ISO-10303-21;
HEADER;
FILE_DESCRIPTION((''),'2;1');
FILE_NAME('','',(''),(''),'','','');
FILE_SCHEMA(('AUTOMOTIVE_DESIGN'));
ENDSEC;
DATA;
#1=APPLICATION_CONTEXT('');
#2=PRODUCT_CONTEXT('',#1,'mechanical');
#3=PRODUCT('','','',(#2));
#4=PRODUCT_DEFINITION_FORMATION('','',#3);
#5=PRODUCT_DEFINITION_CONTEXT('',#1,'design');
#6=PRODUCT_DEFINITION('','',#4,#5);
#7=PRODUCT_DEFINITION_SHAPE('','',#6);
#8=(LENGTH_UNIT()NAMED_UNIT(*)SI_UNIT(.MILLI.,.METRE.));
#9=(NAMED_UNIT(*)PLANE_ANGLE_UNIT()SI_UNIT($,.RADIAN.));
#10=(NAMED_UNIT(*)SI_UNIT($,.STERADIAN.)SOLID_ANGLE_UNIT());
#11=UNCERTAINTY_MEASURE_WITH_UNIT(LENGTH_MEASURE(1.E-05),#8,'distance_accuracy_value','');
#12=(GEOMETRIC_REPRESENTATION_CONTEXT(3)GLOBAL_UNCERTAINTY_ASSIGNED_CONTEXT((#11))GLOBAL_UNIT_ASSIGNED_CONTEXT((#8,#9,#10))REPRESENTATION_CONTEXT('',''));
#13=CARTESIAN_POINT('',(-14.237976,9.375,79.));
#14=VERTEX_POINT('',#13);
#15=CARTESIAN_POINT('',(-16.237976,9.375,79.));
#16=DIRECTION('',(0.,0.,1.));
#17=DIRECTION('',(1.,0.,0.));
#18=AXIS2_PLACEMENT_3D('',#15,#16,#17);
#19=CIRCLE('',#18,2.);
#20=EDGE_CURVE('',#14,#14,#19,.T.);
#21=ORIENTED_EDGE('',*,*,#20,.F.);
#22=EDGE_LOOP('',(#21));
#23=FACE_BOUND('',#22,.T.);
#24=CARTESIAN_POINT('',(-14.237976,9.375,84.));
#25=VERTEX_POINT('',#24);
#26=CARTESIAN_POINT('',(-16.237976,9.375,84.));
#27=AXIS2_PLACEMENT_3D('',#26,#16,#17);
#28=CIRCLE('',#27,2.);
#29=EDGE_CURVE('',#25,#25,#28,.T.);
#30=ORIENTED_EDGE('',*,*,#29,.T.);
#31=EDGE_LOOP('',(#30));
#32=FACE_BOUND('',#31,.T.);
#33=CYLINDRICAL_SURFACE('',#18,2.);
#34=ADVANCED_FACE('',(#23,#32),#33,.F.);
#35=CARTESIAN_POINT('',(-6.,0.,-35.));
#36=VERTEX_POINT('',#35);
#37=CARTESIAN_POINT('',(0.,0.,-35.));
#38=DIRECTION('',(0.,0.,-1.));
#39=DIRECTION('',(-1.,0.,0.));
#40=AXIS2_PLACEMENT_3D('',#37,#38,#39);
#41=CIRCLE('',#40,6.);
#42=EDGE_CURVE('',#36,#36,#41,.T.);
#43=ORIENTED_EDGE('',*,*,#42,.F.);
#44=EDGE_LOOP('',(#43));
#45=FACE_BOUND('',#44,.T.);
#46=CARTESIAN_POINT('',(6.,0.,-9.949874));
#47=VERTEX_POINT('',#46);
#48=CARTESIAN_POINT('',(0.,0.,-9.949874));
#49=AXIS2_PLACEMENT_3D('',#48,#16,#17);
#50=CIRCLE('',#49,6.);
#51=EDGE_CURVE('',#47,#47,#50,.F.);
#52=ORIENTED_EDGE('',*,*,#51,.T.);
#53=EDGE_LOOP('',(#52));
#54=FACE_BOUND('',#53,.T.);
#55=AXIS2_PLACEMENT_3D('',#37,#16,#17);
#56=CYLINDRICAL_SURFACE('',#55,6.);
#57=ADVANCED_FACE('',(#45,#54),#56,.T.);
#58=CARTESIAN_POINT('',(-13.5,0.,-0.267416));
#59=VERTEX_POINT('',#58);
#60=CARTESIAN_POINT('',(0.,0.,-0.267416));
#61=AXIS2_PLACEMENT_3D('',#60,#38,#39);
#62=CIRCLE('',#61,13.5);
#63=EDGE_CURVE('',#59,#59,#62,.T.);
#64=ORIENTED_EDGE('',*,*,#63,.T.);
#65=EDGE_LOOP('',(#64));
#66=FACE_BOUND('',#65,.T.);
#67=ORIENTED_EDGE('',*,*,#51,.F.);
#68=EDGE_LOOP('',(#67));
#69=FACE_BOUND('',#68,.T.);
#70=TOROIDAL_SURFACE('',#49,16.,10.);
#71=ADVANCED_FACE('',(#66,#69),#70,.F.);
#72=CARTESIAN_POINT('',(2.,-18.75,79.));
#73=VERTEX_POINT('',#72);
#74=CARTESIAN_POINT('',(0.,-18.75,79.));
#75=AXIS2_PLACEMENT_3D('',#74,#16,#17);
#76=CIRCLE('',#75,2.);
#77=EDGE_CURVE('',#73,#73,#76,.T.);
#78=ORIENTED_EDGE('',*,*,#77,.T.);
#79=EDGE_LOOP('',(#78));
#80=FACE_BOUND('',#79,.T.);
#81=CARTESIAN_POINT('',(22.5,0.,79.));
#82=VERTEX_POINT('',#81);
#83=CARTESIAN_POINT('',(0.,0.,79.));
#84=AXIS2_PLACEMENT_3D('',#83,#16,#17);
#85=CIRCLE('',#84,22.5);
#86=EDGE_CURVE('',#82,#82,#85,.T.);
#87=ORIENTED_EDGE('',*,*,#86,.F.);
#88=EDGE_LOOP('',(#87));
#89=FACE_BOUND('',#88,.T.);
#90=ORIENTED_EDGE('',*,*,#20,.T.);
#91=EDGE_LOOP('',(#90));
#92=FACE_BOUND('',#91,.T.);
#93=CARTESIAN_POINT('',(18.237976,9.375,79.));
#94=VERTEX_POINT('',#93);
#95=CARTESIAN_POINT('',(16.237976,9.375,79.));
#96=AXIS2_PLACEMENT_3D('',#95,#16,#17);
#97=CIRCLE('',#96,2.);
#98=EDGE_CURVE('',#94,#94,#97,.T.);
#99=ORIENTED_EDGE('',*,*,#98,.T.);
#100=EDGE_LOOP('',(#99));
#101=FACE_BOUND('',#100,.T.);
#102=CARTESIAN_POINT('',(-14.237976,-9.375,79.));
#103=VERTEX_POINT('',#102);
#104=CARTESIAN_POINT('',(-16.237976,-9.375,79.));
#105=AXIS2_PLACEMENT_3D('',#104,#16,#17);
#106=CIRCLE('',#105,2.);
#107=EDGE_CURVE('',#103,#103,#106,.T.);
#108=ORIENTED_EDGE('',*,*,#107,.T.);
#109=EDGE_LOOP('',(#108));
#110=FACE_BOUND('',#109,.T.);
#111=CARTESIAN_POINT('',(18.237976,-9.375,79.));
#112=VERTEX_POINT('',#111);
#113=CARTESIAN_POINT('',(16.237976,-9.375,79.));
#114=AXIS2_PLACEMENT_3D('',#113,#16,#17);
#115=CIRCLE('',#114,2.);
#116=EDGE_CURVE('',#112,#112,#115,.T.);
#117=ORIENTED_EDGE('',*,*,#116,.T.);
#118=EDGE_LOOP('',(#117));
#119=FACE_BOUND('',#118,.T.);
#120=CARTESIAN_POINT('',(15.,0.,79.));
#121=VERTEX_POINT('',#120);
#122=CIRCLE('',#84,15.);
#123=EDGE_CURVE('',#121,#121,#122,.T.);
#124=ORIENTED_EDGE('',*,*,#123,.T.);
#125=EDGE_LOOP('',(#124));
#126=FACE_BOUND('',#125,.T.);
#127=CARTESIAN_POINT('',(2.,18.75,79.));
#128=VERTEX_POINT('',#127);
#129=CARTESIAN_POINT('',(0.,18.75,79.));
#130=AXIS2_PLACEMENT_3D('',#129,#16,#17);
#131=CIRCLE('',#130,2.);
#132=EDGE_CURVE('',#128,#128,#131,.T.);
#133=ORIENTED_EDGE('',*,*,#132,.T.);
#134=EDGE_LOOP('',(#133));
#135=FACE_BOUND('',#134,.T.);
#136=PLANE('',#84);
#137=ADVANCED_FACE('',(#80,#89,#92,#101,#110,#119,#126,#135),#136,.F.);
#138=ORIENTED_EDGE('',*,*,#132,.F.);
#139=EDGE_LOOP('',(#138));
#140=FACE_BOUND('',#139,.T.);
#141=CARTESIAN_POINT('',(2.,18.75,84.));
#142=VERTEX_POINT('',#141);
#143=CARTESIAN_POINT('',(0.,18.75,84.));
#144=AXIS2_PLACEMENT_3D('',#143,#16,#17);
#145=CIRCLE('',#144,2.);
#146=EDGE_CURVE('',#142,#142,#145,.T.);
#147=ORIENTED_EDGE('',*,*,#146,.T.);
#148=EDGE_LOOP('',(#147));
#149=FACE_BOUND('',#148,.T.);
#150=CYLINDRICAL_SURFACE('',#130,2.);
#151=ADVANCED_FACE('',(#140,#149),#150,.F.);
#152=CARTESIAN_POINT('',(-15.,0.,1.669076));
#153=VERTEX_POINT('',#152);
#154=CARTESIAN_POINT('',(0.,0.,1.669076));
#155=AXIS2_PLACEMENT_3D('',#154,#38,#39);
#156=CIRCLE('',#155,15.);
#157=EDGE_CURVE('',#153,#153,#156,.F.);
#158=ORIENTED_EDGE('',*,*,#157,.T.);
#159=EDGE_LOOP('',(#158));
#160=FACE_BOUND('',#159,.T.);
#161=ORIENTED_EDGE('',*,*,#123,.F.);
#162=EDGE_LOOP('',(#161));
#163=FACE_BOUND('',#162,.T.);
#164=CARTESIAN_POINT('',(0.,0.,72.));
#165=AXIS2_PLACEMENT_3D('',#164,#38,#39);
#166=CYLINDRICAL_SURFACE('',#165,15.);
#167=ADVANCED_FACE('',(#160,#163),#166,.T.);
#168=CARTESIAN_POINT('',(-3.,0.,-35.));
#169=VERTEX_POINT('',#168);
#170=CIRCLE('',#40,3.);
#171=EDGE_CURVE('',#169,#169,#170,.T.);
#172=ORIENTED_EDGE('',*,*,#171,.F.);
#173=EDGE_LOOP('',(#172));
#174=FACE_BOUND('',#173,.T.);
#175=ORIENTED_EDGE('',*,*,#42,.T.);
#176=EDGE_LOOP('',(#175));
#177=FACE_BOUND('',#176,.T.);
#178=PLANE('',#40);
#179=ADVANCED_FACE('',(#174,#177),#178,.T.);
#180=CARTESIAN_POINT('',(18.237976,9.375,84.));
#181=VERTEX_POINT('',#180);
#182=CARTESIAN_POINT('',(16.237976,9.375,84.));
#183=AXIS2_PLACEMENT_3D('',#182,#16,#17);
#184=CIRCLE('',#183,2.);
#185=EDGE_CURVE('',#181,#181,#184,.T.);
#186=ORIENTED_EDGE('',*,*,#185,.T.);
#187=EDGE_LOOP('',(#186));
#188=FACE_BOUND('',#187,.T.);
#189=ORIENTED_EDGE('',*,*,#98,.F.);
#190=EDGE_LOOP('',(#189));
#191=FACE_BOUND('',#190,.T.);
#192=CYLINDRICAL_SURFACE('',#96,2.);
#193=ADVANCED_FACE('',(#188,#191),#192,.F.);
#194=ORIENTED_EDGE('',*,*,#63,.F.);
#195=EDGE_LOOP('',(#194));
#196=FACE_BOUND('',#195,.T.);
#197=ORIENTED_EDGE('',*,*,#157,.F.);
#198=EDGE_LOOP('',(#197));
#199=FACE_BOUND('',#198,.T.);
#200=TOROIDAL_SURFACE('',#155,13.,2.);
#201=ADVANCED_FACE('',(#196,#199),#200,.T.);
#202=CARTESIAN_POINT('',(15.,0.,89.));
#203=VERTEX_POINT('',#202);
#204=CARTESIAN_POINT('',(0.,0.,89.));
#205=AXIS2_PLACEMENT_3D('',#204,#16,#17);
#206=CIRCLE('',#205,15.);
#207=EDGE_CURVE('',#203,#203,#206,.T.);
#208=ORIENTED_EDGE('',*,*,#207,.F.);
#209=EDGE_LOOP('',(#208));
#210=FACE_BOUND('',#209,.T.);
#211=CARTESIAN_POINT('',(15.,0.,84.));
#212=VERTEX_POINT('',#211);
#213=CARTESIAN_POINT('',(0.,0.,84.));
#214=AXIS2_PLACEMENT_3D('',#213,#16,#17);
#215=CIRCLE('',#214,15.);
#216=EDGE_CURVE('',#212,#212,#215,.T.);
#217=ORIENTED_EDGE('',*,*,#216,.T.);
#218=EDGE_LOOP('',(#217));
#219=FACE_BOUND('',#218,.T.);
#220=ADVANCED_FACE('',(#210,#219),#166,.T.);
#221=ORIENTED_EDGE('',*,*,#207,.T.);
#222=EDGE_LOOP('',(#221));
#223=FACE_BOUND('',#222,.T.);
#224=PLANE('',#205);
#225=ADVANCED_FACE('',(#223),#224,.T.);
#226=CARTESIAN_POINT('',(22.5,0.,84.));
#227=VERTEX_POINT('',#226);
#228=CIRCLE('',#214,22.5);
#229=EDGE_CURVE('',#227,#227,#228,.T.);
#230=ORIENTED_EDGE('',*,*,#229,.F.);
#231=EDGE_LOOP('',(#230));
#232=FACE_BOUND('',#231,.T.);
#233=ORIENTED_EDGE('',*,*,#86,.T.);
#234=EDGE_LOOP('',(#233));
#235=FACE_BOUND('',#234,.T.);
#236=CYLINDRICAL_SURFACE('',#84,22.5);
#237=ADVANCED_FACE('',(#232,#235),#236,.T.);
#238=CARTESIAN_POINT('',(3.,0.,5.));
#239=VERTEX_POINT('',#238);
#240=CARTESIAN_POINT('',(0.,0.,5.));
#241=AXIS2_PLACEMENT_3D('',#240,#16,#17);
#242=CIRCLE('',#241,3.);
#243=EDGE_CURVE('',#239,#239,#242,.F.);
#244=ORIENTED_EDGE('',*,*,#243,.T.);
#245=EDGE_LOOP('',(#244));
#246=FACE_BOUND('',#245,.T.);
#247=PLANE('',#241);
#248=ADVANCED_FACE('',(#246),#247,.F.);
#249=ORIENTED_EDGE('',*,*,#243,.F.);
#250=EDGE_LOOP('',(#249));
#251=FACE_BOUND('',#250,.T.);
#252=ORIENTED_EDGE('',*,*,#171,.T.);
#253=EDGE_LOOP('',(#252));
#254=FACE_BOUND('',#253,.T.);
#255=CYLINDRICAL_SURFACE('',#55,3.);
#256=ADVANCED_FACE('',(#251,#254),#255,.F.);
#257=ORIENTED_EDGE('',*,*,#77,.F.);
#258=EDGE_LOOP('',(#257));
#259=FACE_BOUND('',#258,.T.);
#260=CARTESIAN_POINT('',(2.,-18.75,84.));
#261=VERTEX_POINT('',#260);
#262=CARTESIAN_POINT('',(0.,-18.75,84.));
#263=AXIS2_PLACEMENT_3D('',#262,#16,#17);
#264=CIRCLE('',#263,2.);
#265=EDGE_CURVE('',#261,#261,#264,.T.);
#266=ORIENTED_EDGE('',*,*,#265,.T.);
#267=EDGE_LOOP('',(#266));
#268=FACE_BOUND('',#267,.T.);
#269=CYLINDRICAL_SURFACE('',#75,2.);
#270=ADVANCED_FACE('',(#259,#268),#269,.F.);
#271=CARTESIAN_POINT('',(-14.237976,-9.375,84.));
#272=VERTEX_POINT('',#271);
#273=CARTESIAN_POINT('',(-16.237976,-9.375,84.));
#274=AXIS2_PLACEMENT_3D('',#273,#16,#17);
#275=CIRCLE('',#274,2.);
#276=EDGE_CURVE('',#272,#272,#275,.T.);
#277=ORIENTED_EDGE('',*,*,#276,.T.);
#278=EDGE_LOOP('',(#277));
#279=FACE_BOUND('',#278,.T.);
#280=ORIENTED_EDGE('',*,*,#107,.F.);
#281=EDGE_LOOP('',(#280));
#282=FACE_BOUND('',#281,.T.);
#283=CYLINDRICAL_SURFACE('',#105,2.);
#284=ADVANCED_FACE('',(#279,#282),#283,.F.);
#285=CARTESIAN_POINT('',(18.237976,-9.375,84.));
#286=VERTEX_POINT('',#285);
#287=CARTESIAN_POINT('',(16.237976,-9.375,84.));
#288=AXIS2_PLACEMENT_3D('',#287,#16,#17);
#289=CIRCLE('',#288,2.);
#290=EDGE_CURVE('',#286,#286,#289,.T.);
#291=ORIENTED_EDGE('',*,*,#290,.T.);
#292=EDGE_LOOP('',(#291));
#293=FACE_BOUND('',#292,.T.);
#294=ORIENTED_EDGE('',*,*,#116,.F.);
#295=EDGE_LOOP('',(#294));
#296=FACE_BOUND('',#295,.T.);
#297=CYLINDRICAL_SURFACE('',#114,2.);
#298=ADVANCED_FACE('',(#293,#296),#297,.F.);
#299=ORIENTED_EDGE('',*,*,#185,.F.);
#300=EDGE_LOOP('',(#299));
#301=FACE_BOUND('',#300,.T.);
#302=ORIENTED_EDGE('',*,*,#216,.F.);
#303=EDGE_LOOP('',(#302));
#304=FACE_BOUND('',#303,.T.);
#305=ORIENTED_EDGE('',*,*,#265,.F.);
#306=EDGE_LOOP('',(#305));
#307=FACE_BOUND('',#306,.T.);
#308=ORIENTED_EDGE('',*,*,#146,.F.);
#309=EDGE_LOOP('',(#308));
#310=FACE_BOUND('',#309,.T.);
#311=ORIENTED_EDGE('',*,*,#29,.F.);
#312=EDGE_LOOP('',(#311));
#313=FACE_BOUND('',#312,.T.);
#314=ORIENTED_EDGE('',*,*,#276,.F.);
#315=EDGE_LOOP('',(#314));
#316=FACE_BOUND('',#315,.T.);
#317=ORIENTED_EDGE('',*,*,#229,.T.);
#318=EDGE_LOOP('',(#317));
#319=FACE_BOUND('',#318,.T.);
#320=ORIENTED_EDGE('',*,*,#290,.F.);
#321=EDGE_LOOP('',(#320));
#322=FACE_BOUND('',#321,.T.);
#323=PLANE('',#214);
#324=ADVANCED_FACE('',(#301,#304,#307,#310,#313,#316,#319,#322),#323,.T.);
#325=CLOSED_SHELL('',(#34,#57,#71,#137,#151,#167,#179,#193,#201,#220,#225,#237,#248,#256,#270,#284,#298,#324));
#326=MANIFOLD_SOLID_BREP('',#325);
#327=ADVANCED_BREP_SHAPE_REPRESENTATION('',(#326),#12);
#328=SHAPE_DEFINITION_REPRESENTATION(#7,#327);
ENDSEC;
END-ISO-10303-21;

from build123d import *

# Parameters (mm, degrees)
SKETCH1_R           = 15
BOSS_EXTRUDE1_DEPTH = 72
SKETCH3_R           = 15
SKETCH3_R_2         = 7.5
BOSS_EXTRUDE2_DEPTH = 17
BOSS_EXTRUDE3_START = -5
SKETCH4_R           = 22.5
SKETCH4_R_2         = 12.5
SKETCH4_R_3         = 2
BOSS_EXTRUDE3_DEPTH = 5
SKETCH6_R           = 6
SKETCH6_R_2         = 3
BOSS_EXTRUDE4_DEPTH = 35
CUT_EXTRUDE2_START  = -67
SKETCH9_R           = 7.5
CUT_EXTRUDE2_DEPTH  = 67
CUT_EXTRUDE3_START  = -5
SKETCH10_R          = 3
CUT_EXTRUDE3_DEPTH  = 5
FILLET1_R           = 10
FILLET2_R           = 2
BOSS_EXTRUDE5_START = -84
SKETCH12_R          = 7.5
BOSS_EXTRUDE5_DEPTH = 84


with BuildPart() as part:
    # Sketch1 → Boss-Extrude1 (new body)
    with BuildSketch(Plane.XY):
        Circle(SKETCH1_R)
    extrude(amount=BOSS_EXTRUDE1_DEPTH)

    # Sketch3 → Boss-Extrude2 (add)
    with BuildSketch(Plane.XY.offset(72)):
        Circle(SKETCH3_R)
        Circle(SKETCH3_R_2, mode=Mode.SUBTRACT)
    extrude(amount=BOSS_EXTRUDE2_DEPTH)

    # Sketch4 → Boss-Extrude3 (add)
    with BuildSketch(Plane.XY.offset(89).offset(BOSS_EXTRUDE3_START)):
        Circle(SKETCH4_R)
        Circle(SKETCH4_R_2, mode=Mode.SUBTRACT)
        with Locations((0, 18.75)):
            Circle(SKETCH4_R_3, mode=Mode.SUBTRACT)
        with Locations((16.237976321, 9.375)):
            Circle(SKETCH4_R_3, mode=Mode.SUBTRACT)
        with Locations((16.237976321, -9.375)):
            Circle(SKETCH4_R_3, mode=Mode.SUBTRACT)
        with Locations((0, -18.75)):
            Circle(SKETCH4_R_3, mode=Mode.SUBTRACT)
        with Locations((-16.237976321, -9.375)):
            Circle(SKETCH4_R_3, mode=Mode.SUBTRACT)
        with Locations((-16.237976321, 9.375)):
            Circle(SKETCH4_R_3, mode=Mode.SUBTRACT)
    extrude(amount=-BOSS_EXTRUDE3_DEPTH)

    # Sketch6 → Boss-Extrude4 (add)
    with BuildSketch(Plane(origin=(0, 0, 0), x_dir=(-1, 0, 0), z_dir=(0, 0, -1))):
        with Locations(Location((0, 0, 0), (0, 0, 180))):
            Circle(SKETCH6_R)
        Circle(SKETCH6_R_2, mode=Mode.SUBTRACT)
    extrude(amount=BOSS_EXTRUDE4_DEPTH)

    # Sketch9 → Cut-Extrude2 (cut)
    with BuildSketch(Plane.XY.offset(72).offset(CUT_EXTRUDE2_START)):
        Circle(SKETCH9_R)
    extrude(amount=CUT_EXTRUDE2_DEPTH, mode=Mode.SUBTRACT)

    # Sketch10 → Cut-Extrude3 (cut)
    with BuildSketch(Plane(origin=(0, 0, 0), x_dir=(-1, 0, 0), z_dir=(0, 0, -1)).offset(CUT_EXTRUDE3_START)):
        with Locations(Location((0, 0, 0), (0, 0, 180))):
            Circle(SKETCH10_R)
    extrude(amount=CUT_EXTRUDE3_DEPTH, mode=Mode.SUBTRACT)

    # Fillet1
    # the kernel refuses this fillet: 10 mm, written as the material it adds along each edge
    with BuildSketch(Plane(origin=(0, 0, 0), x_dir=(1, 0, 0), z_dir=(0, 1, 0))) as fillet1_piece_1:
        with BuildLine():
            CenterArc((16, 9.949874371), FILLET1_R, 180, 84.260829523)
            Line((6, 9.949874371), (5.8, 9.949874371))
            Line((5.8, 9.949874371), (5.8, 0))
            Line((5.8, 0), (6, -0.2))
            ThreePointArc((6, -0.2), (10.5, -0.2), (14.98, -0.198997487))
            Line((14.98, -0.198997487), (15, 0))
        make_face()
    revolve(axis=Axis((0, 0, 0), (0, 0, -1)))

    # Fillet2
    fillet2_edges = [part.edges().sort_by_distance(p)[0] for p in [
        (-15, 0, 0),
    ]]
    fillet(fillet2_edges, radius=FILLET2_R)

    # Sketch12 → Boss-Extrude5 (add)
    with BuildSketch(Plane.XY.offset(89).offset(BOSS_EXTRUDE5_START)):
        Circle(SKETCH12_R)
    extrude(amount=BOSS_EXTRUDE5_DEPTH)


solid = part.part
